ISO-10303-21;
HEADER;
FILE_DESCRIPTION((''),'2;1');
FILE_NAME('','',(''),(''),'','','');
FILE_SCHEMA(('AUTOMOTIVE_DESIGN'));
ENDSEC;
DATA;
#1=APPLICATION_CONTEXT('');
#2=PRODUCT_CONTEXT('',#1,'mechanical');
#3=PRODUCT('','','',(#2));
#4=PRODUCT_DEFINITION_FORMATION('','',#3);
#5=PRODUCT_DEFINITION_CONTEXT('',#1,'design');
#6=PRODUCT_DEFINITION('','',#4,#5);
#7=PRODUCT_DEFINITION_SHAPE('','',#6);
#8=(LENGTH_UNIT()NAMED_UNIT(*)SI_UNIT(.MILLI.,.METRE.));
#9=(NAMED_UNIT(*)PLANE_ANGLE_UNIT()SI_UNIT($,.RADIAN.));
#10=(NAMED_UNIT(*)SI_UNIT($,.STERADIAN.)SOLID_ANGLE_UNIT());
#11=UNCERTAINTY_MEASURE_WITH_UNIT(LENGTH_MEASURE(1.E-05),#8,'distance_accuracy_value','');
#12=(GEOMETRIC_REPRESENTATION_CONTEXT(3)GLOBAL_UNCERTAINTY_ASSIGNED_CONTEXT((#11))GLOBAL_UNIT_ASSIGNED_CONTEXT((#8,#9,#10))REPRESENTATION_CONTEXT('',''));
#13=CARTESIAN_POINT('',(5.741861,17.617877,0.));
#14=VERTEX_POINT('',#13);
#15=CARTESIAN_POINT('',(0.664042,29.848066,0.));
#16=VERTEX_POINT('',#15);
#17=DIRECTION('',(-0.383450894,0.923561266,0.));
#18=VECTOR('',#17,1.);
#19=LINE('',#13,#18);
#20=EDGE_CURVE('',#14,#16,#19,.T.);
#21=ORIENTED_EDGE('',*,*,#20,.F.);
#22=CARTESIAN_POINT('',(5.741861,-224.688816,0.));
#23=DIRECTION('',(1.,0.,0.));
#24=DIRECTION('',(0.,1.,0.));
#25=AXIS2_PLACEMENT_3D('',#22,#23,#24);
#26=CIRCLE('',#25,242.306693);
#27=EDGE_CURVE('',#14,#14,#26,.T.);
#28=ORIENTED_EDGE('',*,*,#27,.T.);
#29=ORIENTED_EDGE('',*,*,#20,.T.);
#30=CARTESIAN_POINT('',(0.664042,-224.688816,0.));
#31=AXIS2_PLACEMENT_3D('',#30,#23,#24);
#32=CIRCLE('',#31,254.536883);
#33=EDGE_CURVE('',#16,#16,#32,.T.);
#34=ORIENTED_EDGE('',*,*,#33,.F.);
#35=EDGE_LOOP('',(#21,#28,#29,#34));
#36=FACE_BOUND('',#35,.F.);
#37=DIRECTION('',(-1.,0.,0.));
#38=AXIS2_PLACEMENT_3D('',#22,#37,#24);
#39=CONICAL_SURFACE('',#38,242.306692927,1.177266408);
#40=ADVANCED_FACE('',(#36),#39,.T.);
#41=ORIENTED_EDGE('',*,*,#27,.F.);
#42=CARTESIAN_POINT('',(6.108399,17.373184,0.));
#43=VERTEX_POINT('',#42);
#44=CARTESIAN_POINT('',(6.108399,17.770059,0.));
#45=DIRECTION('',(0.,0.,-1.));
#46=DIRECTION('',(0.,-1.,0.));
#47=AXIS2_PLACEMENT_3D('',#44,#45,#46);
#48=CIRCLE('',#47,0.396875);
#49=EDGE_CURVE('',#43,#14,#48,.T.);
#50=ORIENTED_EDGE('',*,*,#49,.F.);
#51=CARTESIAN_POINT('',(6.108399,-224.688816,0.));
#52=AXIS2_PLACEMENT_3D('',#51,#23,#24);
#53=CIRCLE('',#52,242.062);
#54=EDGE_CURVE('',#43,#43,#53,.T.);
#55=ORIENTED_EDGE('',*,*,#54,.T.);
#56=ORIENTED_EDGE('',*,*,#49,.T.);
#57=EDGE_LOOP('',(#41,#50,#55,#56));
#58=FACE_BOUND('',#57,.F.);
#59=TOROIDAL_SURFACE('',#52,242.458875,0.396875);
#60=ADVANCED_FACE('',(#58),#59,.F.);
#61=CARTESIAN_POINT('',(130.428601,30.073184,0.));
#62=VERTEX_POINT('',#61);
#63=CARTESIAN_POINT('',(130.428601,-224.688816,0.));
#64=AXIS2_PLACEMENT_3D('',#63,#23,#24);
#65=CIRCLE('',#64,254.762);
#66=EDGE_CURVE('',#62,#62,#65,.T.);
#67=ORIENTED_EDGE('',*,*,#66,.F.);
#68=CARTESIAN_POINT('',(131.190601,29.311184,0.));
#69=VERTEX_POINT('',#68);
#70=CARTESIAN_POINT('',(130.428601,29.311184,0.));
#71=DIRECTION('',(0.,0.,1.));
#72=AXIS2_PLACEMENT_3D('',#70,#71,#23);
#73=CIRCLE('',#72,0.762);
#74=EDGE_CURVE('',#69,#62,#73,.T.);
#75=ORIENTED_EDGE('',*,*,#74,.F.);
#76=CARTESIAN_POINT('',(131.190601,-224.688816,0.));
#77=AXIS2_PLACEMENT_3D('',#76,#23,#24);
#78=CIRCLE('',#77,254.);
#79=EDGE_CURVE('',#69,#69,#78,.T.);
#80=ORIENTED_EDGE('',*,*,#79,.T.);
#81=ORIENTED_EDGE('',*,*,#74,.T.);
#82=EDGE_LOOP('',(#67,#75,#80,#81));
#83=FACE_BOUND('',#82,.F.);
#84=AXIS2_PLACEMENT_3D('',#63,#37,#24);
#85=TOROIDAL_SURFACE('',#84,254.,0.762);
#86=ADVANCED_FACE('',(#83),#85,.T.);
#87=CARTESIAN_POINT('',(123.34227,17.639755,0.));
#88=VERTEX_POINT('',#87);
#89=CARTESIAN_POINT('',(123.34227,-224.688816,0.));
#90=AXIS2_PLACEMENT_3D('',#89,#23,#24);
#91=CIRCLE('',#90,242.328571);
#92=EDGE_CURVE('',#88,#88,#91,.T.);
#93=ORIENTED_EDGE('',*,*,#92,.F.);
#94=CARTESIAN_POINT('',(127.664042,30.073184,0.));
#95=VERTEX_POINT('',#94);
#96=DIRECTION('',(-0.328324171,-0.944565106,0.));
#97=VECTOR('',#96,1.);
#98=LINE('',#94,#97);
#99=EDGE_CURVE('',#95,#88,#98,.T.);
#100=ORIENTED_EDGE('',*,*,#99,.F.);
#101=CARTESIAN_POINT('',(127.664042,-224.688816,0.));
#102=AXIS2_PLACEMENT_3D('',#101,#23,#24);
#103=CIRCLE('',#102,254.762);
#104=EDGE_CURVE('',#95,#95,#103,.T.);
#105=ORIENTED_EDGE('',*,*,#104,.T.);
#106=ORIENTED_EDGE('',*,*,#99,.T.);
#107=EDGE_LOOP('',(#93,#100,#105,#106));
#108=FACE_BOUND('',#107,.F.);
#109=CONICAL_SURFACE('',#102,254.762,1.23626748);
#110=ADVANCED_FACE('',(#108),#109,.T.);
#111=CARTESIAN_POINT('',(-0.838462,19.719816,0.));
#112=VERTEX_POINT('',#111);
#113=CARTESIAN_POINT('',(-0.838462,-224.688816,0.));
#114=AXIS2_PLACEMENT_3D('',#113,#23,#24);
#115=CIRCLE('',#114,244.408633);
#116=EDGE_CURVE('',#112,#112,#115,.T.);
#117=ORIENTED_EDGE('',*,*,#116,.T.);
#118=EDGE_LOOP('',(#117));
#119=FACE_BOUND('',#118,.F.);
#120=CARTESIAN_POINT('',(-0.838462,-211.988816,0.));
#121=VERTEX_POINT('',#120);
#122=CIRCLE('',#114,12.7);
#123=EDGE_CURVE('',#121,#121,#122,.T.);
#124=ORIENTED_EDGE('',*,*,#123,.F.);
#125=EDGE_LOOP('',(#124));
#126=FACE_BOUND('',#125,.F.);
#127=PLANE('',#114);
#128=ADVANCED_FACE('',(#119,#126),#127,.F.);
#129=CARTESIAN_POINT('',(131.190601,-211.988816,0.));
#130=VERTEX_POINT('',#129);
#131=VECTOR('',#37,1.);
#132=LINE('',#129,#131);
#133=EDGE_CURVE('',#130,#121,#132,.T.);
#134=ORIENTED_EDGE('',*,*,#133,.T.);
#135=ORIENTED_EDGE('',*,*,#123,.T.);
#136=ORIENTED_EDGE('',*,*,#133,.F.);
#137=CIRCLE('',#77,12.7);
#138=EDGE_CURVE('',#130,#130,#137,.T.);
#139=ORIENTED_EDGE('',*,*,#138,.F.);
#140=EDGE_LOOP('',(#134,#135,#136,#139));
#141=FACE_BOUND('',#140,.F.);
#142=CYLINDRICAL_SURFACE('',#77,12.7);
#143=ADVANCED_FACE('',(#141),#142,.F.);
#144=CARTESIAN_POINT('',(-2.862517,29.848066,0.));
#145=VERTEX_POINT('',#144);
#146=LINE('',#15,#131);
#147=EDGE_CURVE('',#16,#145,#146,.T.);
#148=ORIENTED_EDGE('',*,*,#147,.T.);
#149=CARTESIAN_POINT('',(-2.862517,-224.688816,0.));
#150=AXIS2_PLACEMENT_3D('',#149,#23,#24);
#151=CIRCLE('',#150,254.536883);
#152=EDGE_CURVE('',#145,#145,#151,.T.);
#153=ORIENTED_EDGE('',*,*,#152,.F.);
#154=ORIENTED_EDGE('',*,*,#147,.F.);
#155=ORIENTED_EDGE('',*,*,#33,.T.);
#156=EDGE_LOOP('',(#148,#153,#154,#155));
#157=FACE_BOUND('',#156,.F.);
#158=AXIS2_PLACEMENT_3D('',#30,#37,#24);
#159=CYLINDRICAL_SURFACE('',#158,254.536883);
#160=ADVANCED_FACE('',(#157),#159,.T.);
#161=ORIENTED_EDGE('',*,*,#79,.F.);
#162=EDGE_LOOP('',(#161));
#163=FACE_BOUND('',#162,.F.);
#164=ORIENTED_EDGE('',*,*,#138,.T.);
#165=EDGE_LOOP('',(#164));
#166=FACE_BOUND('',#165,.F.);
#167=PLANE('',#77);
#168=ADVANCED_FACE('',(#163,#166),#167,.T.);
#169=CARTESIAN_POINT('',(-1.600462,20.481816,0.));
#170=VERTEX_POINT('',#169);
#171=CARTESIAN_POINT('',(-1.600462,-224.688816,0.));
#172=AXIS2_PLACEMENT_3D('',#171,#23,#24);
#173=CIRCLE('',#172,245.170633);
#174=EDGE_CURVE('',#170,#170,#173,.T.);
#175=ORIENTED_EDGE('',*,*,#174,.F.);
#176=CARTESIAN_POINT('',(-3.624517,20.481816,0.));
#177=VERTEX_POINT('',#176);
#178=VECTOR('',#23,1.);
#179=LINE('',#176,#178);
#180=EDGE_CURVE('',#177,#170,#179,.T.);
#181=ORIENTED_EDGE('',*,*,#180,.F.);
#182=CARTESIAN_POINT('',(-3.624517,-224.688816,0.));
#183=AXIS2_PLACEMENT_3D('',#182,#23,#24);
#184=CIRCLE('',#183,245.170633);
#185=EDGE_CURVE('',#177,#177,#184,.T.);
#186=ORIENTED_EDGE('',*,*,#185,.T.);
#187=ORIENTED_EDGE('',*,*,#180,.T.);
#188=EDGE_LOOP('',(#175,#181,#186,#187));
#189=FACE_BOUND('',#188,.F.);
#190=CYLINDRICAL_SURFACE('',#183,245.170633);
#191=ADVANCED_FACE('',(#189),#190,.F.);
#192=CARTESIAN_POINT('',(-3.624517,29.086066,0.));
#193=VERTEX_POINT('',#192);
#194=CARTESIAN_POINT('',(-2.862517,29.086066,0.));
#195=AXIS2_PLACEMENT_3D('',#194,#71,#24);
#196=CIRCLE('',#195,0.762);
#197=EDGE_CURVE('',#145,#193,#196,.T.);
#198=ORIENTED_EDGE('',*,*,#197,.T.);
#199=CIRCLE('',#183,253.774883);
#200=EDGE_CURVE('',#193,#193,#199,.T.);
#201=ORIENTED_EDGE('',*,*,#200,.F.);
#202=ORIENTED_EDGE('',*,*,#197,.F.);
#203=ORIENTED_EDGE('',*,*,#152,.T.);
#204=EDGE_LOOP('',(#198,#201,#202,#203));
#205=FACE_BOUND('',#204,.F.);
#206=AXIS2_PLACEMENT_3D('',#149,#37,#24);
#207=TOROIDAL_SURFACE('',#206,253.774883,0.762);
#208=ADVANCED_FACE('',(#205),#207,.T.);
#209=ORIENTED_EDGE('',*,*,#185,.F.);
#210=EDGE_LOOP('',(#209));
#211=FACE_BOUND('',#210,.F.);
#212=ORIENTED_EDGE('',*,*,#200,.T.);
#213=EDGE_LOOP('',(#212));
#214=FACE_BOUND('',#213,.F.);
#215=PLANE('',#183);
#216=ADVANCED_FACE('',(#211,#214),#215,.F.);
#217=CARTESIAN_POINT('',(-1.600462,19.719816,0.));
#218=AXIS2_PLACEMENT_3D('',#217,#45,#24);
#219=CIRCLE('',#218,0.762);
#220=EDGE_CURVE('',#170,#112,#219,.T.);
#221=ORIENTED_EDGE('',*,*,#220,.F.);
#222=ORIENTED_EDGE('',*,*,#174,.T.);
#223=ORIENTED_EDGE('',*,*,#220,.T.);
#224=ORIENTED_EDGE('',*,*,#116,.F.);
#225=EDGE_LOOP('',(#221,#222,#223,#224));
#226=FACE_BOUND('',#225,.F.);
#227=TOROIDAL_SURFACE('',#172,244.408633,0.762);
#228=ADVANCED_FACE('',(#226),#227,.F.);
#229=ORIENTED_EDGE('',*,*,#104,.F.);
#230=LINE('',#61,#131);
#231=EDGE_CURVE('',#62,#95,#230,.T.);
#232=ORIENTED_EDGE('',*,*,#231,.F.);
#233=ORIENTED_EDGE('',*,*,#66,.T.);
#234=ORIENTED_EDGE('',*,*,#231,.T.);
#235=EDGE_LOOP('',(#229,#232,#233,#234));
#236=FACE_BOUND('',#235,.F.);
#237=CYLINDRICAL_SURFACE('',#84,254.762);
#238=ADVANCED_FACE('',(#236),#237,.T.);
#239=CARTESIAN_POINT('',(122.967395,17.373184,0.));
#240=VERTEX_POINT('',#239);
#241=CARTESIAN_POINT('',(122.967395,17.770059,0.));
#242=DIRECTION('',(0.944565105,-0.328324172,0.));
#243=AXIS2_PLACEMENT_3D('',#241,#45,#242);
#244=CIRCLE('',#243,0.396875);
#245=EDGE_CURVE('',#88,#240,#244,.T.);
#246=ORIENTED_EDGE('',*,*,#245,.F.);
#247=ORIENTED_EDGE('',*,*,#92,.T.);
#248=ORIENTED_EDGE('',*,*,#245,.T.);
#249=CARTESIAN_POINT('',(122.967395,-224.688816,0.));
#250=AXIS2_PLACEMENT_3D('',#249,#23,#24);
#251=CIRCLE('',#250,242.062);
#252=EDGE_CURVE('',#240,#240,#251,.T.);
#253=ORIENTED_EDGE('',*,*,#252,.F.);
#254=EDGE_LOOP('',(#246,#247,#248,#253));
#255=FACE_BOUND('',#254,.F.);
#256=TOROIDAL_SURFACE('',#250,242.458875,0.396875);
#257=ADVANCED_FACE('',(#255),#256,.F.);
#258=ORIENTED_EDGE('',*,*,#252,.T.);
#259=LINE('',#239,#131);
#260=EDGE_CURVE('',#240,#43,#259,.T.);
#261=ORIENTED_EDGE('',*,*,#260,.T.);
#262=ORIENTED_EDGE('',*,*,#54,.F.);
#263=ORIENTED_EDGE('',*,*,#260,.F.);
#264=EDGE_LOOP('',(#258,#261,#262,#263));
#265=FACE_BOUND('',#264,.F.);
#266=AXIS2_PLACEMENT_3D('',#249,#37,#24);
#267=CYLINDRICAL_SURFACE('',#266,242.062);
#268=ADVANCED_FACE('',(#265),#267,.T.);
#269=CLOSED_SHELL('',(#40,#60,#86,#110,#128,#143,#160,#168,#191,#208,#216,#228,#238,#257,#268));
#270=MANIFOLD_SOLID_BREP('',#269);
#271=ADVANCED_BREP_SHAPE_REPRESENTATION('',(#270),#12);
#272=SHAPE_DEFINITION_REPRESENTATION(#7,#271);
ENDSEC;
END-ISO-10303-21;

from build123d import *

# Parameters (mm, degrees)
F2_R     = 12.7
F3_DEPTH = 134.8161187441


# Not quite as in the source:
# - a feature names something its author has since deleted; it is built from what else it names


with BuildPart() as f1:
    # F0 (on Top) → F1 (revolve)
    with BuildSketch(Plane.XY):
        with BuildLine():
            Line((-3.6245174784, 29.0860664694), (-3.6245174784, 20.4818164694))
            Line((-3.6245174784, 20.4818164694), (-1.6004623353, 20.4818164694))
            ThreePointArc((-1.6004623353, 20.4818164694), (-1.0616469681, 20.2586318366), (-0.8384623353, 19.7198164694))
            Line((-0.8384623353, 19.7198164694), (-0.8384623353, -224.6888160382))
            Line((-0.8384623353, -224.6888160382), (131.1906012657, -224.6888160382))
            Line((131.1906012657, -224.6888160382), (131.1906012657, 29.3111839618))
            ThreePointArc((131.1906012657, 29.3111839618), (130.967416633, 29.8499993291), (130.4286012657, 30.0731839618))
            Line((130.4286012657, 30.0731839618), (127.6640418936, 30.0731839618))
            Line((127.6640418936, 30.0731839618), (123.3422697523, 17.6397553064))
            ThreePointArc((123.3422697523, 17.6397553064), (123.1973905872, 17.4466211557), (122.967395476, 17.3731839618))
            Line((122.967395476, 17.3731839618), (6.1083994667, 17.3731839618))
            ThreePointArc((6.1083994667, 17.3731839618), (5.8880446333, 17.4399778914), (5.7418610892, 17.6178768884))
            Line((5.7418610892, 17.6178768884), (0.6640418936, 29.8480664694))
            Line((0.6640418936, 29.8480664694), (-2.8625174784, 29.8480664694))
            ThreePointArc((-2.8625174784, 29.8480664694), (-3.4013328457, 29.6248818366), (-3.6245174784, 29.0860664694))
        make_face()
    revolve(axis=Axis((65.1760694652, -224.6888160382, 0), (1, 0, 0)))

    # F2 (on face) → F3 (cut, through all)
    with BuildSketch(Plane.YZ.offset(131.1906012657)):
        with Locations((-224.6888160382, 0)):
            Circle(F2_R)
    extrude(amount=-F3_DEPTH, mode=Mode.SUBTRACT)


solid = f1.part
